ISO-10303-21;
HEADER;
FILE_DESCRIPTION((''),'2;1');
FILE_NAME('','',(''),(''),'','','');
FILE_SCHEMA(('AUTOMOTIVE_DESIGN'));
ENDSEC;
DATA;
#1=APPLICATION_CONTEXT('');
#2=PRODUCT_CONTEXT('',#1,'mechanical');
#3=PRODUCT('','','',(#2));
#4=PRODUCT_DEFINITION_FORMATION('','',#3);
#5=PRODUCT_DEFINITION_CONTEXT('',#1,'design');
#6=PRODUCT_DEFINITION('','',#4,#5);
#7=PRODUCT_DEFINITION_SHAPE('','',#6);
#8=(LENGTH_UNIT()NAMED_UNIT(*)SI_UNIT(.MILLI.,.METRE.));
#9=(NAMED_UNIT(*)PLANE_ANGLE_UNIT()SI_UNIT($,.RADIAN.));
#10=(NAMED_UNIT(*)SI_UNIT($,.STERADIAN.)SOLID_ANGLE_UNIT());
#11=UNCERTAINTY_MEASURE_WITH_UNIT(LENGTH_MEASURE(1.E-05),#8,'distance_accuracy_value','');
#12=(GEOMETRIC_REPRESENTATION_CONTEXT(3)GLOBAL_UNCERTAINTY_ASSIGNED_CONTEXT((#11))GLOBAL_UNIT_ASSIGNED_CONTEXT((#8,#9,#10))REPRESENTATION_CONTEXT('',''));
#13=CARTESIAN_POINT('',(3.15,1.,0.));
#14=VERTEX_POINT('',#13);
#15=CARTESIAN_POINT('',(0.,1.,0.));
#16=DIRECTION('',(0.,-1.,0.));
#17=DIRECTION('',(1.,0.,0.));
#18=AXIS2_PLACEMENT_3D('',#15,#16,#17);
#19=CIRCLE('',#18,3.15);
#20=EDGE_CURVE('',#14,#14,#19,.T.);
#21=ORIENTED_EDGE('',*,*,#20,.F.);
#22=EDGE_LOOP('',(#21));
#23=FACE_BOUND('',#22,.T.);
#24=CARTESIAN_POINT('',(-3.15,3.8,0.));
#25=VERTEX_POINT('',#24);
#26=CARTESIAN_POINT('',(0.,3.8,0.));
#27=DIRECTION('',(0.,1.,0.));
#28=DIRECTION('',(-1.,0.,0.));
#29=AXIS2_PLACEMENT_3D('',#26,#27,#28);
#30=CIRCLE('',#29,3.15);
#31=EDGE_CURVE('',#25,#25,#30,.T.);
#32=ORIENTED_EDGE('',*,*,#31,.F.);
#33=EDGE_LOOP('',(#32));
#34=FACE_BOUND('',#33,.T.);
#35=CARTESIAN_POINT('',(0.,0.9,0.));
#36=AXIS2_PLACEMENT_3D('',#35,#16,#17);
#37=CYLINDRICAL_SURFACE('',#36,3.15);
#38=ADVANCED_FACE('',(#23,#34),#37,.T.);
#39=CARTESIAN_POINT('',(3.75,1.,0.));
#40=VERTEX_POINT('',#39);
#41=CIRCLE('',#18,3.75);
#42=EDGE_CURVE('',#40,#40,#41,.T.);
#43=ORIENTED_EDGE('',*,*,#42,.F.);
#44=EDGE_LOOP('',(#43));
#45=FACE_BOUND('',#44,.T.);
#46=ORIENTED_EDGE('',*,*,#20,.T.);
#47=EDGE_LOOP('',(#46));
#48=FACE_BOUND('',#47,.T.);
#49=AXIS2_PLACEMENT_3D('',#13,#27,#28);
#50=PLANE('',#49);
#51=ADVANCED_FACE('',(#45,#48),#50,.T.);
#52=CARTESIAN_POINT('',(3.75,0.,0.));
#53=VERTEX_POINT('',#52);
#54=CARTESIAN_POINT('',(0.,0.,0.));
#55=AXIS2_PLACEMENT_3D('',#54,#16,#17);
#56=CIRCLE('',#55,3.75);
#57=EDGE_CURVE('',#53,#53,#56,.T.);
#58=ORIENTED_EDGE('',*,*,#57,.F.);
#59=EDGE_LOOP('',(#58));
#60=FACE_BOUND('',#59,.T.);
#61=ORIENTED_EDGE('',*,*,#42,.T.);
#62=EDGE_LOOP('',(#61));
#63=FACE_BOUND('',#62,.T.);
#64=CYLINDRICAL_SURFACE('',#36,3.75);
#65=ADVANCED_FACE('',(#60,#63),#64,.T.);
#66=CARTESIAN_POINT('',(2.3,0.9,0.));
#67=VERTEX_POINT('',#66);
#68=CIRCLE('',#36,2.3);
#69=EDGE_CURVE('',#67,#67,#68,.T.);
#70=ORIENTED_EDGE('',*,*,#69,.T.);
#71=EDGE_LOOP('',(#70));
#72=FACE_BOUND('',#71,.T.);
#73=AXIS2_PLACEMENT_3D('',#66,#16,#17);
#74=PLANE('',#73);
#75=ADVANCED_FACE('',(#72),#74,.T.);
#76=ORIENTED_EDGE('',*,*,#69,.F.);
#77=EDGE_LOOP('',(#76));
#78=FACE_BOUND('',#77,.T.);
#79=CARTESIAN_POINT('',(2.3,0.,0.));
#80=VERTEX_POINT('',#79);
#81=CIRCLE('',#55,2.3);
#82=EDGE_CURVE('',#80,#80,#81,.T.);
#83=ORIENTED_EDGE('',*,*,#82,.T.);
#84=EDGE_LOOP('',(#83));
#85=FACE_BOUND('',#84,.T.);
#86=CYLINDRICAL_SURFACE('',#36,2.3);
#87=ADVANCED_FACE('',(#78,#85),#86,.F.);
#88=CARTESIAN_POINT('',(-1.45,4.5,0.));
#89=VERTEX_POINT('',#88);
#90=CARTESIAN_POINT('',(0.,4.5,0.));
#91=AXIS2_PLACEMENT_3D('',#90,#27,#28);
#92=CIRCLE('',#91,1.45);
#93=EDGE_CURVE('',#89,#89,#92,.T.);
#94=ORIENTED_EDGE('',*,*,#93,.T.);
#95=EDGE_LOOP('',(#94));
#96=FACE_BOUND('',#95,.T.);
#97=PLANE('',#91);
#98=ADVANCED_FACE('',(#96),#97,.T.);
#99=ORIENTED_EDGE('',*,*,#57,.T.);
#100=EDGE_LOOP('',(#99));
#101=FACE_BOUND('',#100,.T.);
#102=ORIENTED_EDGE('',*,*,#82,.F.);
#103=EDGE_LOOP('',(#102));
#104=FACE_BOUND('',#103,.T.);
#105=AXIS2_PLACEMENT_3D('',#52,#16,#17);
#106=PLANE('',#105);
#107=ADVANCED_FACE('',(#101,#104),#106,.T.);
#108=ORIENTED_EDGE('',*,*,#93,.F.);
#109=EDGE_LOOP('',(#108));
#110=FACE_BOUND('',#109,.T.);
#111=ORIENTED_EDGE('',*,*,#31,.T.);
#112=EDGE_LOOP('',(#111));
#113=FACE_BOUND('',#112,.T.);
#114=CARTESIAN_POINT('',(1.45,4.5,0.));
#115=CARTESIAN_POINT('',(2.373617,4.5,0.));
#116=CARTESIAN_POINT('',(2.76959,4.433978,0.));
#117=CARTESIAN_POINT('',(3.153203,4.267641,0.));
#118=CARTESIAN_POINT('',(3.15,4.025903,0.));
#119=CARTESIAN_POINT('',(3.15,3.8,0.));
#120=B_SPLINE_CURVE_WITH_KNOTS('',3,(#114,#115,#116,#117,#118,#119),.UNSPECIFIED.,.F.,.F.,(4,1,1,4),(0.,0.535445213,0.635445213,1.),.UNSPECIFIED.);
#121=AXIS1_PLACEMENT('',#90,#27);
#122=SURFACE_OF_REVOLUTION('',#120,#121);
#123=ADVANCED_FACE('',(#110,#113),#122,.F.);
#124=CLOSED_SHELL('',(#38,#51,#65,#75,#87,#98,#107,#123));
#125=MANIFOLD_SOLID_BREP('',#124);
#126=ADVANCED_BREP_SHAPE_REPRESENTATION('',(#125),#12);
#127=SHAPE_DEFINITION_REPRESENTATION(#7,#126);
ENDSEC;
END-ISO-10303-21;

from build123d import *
from OCP.BRepAlgoAPI import BRepAlgoAPI_Cut
from OCP.TopTools import TopTools_ListOfShape


with BuildPart() as part:
    # 草图1 → 旋转1 (revolve)
    with BuildSketch(Plane.XY):
        Polygon((2.3, 0), (2.3, 0.9), (0, 0.9), (0, 4.5), (3.15, 4.5), (3.15, 1), (3.75, 1), (3.75, 0), align=None)
    revolve(axis=Axis((0, 0.9, 0), (0, 1, 0)))


with BuildPart() as cut_revolve_6_tool:
    # 草图2 → 切除-旋转6 (revolve)
    with BuildSketch(Plane.XY):
        with BuildLine():
            Line((1.45, 4.5), (3.15, 4.5))
            Line((3.15, 4.5), (3.15, 3.8))
            add(Edge.make_bspline(
                [(1.45, 4.5), (2.373616695, 4.5), (2.769590277, 4.433977798), (3.153202517, 4.267640833), (3.15, 4.025903219), (3.15, 3.8)],
                knots=[0, 0, 0, 0, 0.535445213, 0.635445213, 1, 1, 1, 1], degree=3))
        make_face()
    revolve(axis=Axis((0, 4.5, 0), (0, -1, 0)))


with BuildPart() as part_1:
    add(part.part)

    # 切除-旋转6: cut by cut_revolve_6_tool, with a tolerance
    cut_revolve_6_stock = TopTools_ListOfShape()
    cut_revolve_6_stock.Append(part_1.part.wrapped)
    cut_revolve_6_tools = TopTools_ListOfShape()
    cut_revolve_6_tools.Append(cut_revolve_6_tool.part.wrapped)
    cut_revolve_6_cut = BRepAlgoAPI_Cut()
    cut_revolve_6_cut.SetArguments(cut_revolve_6_stock)
    cut_revolve_6_cut.SetTools(cut_revolve_6_tools)
    cut_revolve_6_cut.SetFuzzyValue(0.00001)
    cut_revolve_6_cut.Build()
    add(Compound.cast(cut_revolve_6_cut.Shape()).solids(), mode=Mode.REPLACE)


solid = part_1.part
